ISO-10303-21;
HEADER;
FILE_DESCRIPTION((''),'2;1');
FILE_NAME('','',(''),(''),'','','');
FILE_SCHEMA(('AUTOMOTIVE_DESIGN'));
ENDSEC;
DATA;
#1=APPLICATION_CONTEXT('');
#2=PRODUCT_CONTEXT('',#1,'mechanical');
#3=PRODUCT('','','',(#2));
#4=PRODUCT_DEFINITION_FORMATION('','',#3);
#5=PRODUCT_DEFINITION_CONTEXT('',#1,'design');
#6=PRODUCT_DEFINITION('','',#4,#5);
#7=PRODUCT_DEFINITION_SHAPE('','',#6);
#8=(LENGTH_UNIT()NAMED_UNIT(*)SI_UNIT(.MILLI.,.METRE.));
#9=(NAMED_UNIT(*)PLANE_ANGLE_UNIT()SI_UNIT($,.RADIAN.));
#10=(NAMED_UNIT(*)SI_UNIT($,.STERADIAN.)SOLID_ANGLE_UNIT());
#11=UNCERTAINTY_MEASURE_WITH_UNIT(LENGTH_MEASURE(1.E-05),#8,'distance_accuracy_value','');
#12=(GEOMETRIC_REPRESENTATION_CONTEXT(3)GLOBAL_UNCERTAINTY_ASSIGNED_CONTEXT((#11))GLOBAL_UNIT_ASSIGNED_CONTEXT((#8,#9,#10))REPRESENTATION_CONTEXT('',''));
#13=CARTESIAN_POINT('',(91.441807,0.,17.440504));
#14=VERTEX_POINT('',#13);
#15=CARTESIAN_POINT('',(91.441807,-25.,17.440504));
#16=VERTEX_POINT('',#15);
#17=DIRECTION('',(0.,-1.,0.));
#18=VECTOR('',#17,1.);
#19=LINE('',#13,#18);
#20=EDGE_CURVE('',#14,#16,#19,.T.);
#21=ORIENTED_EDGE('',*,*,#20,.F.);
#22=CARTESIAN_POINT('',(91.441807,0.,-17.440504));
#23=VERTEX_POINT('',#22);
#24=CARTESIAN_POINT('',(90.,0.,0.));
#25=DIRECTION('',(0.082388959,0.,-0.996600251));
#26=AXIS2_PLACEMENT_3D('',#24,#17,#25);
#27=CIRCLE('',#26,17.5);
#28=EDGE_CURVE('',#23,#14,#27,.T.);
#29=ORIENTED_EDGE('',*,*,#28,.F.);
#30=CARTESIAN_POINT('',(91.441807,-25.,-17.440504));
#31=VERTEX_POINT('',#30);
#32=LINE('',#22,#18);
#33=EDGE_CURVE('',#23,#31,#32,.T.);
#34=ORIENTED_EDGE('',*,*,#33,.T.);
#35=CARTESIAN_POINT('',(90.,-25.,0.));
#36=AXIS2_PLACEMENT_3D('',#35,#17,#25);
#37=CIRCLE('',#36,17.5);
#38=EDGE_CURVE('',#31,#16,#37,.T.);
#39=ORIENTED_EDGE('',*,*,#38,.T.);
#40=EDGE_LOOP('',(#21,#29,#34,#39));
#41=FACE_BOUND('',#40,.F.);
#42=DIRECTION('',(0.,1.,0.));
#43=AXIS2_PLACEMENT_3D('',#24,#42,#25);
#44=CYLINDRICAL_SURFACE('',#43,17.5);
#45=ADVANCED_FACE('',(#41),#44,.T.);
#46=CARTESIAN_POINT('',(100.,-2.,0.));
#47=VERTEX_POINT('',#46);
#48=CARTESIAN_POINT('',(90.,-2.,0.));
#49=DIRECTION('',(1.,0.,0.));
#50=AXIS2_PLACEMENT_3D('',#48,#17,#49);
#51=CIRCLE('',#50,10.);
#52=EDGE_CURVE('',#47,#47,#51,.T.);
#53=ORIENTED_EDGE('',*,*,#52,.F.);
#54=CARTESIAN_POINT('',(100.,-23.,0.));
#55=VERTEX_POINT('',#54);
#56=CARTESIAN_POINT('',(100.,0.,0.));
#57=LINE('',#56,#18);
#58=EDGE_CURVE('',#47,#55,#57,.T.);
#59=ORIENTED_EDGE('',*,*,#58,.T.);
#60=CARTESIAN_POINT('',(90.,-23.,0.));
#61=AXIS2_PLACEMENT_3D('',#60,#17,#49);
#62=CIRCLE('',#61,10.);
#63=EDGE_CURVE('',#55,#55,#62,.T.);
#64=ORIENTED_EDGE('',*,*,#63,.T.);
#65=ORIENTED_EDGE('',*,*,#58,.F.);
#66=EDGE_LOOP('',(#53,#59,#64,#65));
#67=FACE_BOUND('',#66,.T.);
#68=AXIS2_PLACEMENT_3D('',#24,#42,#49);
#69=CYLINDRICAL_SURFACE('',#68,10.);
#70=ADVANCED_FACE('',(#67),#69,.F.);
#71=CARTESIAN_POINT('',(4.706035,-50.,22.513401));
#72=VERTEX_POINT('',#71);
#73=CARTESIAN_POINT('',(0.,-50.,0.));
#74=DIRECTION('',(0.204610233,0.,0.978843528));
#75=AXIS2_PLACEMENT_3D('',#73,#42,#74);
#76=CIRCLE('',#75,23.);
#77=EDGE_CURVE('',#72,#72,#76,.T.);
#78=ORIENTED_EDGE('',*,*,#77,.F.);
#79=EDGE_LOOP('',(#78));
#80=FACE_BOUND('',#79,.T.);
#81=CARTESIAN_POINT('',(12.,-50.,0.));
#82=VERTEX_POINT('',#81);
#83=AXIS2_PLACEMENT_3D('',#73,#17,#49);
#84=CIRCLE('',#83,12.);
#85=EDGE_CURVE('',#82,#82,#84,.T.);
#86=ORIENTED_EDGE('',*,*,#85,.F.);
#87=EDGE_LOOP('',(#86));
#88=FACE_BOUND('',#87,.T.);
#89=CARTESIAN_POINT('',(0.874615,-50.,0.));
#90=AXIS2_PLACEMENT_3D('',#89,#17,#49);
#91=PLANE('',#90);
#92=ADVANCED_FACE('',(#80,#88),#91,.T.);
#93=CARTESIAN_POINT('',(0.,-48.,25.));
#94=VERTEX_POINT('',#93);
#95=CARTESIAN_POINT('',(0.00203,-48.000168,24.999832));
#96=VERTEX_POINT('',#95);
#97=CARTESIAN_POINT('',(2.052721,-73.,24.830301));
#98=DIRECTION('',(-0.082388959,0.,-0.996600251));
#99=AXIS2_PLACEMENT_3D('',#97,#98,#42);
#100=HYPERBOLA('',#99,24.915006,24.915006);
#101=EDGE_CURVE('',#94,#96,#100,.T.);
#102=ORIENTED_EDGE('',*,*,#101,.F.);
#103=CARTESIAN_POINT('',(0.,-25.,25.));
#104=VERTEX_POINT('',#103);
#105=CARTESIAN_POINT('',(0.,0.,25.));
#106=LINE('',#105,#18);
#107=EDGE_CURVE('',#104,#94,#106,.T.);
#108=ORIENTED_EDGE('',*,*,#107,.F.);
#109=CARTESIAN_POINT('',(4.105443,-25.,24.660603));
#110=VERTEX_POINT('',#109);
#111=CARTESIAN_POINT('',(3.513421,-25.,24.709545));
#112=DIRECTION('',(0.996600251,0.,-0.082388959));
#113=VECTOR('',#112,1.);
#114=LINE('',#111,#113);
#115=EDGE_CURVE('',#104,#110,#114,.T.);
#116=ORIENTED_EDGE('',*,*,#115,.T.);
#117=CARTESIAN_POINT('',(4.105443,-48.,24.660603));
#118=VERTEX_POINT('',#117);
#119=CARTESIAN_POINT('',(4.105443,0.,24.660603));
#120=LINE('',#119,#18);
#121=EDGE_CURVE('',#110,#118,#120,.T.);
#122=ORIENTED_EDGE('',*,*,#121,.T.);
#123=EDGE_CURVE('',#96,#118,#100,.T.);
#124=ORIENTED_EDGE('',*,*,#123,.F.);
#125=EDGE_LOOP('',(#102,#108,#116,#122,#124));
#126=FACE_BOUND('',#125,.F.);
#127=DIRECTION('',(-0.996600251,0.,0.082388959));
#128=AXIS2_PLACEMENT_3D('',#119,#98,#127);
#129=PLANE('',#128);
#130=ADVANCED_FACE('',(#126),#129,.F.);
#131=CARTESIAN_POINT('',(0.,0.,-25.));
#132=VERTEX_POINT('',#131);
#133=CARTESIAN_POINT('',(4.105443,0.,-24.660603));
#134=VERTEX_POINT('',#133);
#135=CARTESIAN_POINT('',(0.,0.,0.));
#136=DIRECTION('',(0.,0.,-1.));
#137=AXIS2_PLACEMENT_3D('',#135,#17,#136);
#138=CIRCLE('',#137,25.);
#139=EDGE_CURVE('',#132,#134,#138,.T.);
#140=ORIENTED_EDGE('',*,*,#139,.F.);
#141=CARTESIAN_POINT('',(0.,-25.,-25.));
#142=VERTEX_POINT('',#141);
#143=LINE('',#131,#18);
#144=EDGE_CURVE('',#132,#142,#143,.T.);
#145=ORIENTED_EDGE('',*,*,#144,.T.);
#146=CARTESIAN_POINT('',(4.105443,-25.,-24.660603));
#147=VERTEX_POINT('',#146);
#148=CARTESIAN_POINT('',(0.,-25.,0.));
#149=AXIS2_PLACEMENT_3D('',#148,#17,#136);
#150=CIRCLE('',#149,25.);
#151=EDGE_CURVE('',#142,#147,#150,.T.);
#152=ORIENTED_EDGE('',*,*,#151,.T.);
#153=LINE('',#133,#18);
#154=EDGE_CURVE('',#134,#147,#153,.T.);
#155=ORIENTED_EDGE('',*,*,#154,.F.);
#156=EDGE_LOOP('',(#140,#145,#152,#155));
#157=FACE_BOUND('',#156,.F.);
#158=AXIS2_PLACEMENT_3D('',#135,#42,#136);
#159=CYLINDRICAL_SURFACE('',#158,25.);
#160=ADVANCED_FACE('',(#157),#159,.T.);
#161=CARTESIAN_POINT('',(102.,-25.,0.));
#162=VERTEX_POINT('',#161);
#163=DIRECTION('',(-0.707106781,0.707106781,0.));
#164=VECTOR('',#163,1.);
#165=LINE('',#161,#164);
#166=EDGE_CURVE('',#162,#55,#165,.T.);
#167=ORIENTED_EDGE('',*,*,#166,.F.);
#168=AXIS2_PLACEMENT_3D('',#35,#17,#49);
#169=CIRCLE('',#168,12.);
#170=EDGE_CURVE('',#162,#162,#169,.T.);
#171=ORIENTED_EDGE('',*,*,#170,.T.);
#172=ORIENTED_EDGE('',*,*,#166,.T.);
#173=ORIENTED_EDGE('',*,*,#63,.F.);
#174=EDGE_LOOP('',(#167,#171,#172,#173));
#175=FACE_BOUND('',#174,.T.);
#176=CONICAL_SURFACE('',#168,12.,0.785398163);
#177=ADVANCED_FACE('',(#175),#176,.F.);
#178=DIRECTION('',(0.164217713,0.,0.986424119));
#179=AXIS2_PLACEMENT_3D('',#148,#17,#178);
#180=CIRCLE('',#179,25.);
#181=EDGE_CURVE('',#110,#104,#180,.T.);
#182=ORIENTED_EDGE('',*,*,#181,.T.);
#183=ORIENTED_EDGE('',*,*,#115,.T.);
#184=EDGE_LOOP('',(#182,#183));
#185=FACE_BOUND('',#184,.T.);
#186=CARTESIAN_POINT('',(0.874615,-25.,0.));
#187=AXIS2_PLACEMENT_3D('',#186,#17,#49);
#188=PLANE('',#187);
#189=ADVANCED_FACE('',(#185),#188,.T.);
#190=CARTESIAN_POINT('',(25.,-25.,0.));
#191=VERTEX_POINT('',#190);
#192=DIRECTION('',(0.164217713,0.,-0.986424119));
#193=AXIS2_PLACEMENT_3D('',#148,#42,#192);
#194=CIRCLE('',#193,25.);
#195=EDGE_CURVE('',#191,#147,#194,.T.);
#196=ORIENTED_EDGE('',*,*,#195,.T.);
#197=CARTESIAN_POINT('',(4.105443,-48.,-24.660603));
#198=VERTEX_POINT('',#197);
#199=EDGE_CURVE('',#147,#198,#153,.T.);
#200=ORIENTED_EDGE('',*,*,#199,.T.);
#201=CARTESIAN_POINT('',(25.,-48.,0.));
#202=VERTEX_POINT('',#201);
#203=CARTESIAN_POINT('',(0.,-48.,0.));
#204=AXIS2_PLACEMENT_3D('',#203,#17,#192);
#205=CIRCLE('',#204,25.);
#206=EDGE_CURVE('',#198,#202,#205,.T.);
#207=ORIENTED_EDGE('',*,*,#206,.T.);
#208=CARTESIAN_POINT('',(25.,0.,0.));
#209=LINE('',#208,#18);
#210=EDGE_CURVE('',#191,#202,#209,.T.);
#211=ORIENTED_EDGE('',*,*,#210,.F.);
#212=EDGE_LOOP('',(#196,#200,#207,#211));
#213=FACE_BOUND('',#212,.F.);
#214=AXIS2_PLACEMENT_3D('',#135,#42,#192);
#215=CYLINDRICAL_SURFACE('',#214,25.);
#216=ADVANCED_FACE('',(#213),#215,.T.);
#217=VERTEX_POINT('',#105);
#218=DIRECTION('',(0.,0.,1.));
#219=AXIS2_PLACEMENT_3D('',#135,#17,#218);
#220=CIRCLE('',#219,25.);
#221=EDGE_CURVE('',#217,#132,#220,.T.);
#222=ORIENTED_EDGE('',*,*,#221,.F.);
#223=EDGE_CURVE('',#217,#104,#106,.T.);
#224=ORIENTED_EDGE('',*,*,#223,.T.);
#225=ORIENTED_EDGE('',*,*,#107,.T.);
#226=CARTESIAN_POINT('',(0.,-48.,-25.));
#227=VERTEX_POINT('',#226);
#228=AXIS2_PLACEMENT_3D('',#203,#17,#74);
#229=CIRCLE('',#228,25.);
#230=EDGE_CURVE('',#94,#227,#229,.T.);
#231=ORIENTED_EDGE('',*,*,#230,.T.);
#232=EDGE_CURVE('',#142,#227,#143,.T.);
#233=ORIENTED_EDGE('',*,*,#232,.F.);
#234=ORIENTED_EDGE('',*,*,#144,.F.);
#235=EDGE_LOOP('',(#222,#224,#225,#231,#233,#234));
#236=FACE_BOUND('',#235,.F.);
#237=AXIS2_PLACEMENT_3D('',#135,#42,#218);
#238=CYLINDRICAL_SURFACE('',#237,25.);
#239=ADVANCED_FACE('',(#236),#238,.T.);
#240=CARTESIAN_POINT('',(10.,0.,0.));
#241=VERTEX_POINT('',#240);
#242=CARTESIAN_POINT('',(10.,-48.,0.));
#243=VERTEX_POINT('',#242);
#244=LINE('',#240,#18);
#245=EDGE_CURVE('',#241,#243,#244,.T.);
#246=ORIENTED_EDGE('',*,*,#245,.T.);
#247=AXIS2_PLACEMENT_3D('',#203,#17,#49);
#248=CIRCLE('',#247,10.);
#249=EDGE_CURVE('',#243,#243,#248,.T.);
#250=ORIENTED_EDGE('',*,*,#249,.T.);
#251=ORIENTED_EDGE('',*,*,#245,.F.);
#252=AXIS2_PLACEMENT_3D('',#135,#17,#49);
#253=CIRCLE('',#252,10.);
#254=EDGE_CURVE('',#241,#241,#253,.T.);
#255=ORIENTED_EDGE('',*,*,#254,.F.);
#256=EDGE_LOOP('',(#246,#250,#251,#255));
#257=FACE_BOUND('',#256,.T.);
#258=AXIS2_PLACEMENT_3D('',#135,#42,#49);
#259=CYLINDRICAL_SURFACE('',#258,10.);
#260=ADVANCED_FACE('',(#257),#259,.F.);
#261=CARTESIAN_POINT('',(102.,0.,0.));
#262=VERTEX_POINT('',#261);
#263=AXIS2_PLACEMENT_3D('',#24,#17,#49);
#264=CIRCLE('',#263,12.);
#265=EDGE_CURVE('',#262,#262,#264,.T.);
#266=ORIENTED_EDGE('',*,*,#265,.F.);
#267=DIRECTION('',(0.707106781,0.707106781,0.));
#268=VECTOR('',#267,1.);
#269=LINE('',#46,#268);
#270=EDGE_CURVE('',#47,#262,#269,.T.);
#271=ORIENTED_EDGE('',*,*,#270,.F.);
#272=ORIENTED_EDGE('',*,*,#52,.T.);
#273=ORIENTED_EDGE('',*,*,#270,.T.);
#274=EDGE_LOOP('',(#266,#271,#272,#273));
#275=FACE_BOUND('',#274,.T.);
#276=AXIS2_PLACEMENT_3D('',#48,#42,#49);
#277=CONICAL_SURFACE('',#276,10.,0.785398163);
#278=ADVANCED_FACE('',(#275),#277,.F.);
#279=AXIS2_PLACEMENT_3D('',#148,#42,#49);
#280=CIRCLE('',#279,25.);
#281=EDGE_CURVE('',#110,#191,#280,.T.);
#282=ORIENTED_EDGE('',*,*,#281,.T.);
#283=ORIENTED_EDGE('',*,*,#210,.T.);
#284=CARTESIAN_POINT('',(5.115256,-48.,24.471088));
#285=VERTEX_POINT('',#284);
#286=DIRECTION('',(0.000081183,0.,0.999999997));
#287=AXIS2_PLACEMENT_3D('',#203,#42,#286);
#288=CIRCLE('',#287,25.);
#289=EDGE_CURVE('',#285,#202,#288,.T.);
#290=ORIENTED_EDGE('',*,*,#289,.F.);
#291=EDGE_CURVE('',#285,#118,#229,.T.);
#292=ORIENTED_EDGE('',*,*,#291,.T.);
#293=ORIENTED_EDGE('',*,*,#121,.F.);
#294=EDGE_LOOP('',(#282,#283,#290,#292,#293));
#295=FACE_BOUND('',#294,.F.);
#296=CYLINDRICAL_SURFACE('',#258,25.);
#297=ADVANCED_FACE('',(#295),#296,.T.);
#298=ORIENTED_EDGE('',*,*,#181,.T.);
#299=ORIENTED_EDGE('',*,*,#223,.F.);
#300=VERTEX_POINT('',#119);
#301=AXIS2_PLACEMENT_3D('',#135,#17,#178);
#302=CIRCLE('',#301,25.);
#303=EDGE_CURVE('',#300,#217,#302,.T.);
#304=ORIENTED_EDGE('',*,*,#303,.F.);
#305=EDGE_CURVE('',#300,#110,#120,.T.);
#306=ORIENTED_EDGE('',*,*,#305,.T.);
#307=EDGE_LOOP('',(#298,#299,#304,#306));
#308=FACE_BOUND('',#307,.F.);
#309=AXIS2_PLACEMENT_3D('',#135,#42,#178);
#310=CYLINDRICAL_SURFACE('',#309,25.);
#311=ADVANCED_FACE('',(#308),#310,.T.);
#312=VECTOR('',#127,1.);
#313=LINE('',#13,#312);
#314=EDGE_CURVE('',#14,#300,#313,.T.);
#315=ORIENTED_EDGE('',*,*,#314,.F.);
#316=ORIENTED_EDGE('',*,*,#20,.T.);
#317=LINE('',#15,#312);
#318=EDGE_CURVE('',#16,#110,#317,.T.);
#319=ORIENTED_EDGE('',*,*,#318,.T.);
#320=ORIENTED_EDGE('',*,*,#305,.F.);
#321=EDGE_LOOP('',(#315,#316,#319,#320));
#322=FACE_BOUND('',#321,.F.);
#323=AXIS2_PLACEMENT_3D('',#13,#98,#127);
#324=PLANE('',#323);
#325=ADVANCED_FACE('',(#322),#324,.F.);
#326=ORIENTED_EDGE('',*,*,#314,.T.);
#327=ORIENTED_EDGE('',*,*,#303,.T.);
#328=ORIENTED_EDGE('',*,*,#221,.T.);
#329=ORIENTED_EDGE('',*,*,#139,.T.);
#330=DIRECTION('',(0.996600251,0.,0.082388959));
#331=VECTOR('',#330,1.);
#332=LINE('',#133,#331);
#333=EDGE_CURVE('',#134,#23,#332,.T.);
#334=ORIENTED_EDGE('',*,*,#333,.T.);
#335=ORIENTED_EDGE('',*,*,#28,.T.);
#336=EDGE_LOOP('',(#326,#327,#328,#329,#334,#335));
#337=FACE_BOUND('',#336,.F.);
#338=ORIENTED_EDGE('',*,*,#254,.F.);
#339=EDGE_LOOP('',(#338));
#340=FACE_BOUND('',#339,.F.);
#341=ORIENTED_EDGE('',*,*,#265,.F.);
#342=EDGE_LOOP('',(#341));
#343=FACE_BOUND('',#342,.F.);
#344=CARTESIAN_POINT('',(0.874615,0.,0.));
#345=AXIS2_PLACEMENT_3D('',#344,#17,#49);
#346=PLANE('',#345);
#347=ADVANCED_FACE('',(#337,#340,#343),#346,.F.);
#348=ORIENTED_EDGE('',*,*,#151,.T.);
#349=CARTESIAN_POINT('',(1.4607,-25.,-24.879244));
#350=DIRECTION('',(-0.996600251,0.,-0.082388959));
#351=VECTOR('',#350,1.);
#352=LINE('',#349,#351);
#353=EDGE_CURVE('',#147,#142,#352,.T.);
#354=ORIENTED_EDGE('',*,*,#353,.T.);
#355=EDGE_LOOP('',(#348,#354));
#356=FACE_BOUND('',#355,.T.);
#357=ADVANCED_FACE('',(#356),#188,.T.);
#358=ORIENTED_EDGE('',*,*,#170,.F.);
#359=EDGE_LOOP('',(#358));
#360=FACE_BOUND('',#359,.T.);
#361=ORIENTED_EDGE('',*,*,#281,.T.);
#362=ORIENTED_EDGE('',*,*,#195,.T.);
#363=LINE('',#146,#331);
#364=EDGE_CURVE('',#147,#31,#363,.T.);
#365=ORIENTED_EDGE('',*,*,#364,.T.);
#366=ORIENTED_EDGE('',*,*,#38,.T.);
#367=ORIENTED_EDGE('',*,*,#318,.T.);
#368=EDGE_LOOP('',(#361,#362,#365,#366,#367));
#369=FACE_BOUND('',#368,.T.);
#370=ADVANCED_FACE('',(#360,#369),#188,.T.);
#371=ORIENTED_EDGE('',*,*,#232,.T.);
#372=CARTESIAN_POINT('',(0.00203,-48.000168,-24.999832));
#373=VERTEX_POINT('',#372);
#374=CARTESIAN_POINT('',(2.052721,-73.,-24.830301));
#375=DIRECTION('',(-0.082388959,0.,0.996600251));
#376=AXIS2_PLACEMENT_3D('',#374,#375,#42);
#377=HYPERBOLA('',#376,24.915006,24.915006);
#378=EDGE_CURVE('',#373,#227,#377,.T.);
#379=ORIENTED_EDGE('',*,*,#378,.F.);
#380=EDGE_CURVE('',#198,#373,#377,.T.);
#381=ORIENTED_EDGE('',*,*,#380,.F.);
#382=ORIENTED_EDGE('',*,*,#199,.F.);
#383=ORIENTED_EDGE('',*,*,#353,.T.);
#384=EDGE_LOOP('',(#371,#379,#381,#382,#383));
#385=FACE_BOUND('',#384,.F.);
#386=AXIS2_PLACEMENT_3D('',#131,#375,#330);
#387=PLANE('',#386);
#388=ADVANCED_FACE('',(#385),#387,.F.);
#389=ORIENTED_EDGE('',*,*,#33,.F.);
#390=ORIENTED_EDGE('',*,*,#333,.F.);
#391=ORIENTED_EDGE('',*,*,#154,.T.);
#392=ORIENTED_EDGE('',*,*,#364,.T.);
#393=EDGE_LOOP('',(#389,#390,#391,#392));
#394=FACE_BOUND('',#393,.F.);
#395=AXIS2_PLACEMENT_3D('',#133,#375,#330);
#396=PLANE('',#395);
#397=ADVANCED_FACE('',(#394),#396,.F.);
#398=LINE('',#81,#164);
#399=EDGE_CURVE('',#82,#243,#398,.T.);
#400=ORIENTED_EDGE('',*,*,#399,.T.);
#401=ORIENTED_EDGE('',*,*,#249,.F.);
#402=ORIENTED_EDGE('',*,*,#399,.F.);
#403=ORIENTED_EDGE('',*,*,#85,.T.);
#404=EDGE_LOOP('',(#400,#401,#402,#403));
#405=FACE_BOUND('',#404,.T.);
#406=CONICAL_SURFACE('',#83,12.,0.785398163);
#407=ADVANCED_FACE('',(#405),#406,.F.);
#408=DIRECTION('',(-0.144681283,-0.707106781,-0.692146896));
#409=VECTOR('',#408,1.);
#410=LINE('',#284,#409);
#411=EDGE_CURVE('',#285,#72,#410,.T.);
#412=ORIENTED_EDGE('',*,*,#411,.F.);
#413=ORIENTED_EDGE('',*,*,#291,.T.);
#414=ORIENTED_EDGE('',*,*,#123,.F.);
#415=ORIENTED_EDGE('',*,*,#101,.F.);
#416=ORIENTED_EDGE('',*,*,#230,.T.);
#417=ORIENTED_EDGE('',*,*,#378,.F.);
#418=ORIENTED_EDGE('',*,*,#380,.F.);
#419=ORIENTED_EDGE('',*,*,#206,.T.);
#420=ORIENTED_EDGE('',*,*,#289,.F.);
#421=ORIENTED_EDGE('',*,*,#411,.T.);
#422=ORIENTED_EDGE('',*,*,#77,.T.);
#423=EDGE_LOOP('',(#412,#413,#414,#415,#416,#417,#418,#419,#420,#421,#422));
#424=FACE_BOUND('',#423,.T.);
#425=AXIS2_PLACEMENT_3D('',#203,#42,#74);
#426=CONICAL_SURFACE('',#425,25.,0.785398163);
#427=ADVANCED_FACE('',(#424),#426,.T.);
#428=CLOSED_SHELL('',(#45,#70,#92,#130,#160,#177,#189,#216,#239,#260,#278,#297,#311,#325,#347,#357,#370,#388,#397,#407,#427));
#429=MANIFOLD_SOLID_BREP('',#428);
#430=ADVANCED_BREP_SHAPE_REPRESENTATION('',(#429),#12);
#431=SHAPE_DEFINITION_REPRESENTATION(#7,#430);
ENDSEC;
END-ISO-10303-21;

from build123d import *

# Parameters (mm, degrees)
F0_R        = 10
F1_DEPTH    = 25
F2_DEPTH    = 50
F3_T4_ANGLE = 203.6133668192
F3_T6_ANGLE = 179.9906971182


# Not quite as in the source:
# - a fillet or chamfer that OpenCascade refuses, or shapes differently, is made with other operations: its cross-section is extruded or revolved along the edge and cut away or added


with BuildPart() as f1:
    # F0 (on Front) → F1 (new body)
    with BuildSketch(Plane.XZ):
        with BuildLine():
            Line((4.1054428346, 24.6606029758), (0, 25))
            ThreePointArc((0, 25), (-25, 0), (0, -25))
            Line((0, -25), (4.1054428346, -24.6606029758))
            ThreePointArc((4.1054428346, -24.6606029758), (19.0740146648, -16.1611251022), (25, 0))
            ThreePointArc((25, 0), (19.0740146648, 16.1611251022), (4.1054428346, 24.6606029758))
        make_face()
        Circle(F0_R, mode=Mode.SUBTRACT)
        with BuildLine():
            ThreePointArc((4.1054428346, 24.6606029758), (2.0597239626, 24.9150062653), (0, 25))
            Line((0, 25), (4.1054428346, 24.6606029758))
        make_face()
        with BuildLine():
            Line((4.1054428346, -24.6606029758), (0, -25))
            ThreePointArc((0, -25), (2.0597239626, -24.9150062653), (4.1054428346, -24.6606029758))
        make_face()
        with BuildLine():
            Line((91.4418067738, 17.4405043857), (4.1054428346, 24.6606029758))
            ThreePointArc((4.1054428346, 24.6606029758), (19.0740146648, 16.1611251022), (25, 0))
            ThreePointArc((25, 0), (19.0740146648, -16.1611251022), (4.1054428346, -24.6606029758))
            Line((4.1054428346, -24.6606029758), (91.4418067738, -17.4405043857))
            ThreePointArc((91.4418067738, -17.4405043857), (72.5, 0), (91.4418067738, 17.4405043857))
        make_face()
        with BuildLine():
            ThreePointArc((107.5, 0), (102.8740362463, 11.8536572723), (91.4418067738, 17.4405043857))
            ThreePointArc((91.4418067738, 17.4405043857), (72.5, 0), (91.4418067738, -17.4405043857))
            ThreePointArc((91.4418067738, -17.4405043857), (102.8740362463, -11.8536572723), (107.5, 0))
        make_face()
        with Locations((90, 0)):
            Circle(F0_R, mode=Mode.SUBTRACT)
    extrude(amount=F1_DEPTH)

    # F0 (on Front) → F2 (join)
    with BuildSketch(Plane.XZ):
        with BuildLine():
            Line((4.1054428346, 24.6606029758), (0, 25))
            ThreePointArc((0, 25), (-25, 0), (0, -25))
            Line((0, -25), (4.1054428346, -24.6606029758))
            ThreePointArc((4.1054428346, -24.6606029758), (19.0740146648, -16.1611251022), (25, 0))
            ThreePointArc((25, 0), (19.0740146648, 16.1611251022), (4.1054428346, 24.6606029758))
        make_face()
        Circle(F0_R, mode=Mode.SUBTRACT)
    extrude(amount=F2_DEPTH)

    # F3: chamfer of 2 on 5 edges, made by hand

    # F3_s1 → F3_t2 (revolve, cut)
    with BuildSketch(Plane.XY):
        Polygon((12, -50), (10, -48), (10, -50), align=None)
    revolve(axis=Axis((0, -50, 0), (0, -1, 0)), mode=Mode.SUBTRACT)

    # F3_s3 → F3_t4 (revolve, cut)
    with BuildSketch(Plane(origin=(0, 0, 0), x_dir=(0, 1, 0), z_dir=(0.9788435281, 0, -0.2046102329))):
        Polygon((-48, 25), (-50, 23), (-50, 25), align=None)
    revolve(axis=Axis((0, -50, 0), (0, -1, 0)), revolution_arc=F3_T4_ANGLE, mode=Mode.SUBTRACT)

    # F3_s5 → F3_t6 (revolve, cut)
    with BuildSketch(Plane(origin=(0, 0, 0), x_dir=(0, 1, 0), z_dir=(-0.9999999967, 0, 8.1183e-05))):
        Polygon((-48, -25), (-50, -23), (-50, -25), align=None)
    revolve(axis=Axis((0, -50, 0), (0, 1, 0)), revolution_arc=F3_T6_ANGLE, mode=Mode.SUBTRACT)

    # F3_s7 → F3_t8 (revolve, cut)
    with BuildSketch(Plane.XY):
        Polygon((100, -2), (102, 0), (100, 0), align=None)
    revolve(axis=Axis((90, 0, 0), (0, -1, 0)), mode=Mode.SUBTRACT)

    # F3_s9 → F3_t10 (revolve, cut)
    with BuildSketch(Plane.XY):
        Polygon((102, -25), (100, -23), (100, -25), align=None)
    revolve(axis=Axis((90, -25, 0), (0, -1, 0)), mode=Mode.SUBTRACT)


solid = f1.part
